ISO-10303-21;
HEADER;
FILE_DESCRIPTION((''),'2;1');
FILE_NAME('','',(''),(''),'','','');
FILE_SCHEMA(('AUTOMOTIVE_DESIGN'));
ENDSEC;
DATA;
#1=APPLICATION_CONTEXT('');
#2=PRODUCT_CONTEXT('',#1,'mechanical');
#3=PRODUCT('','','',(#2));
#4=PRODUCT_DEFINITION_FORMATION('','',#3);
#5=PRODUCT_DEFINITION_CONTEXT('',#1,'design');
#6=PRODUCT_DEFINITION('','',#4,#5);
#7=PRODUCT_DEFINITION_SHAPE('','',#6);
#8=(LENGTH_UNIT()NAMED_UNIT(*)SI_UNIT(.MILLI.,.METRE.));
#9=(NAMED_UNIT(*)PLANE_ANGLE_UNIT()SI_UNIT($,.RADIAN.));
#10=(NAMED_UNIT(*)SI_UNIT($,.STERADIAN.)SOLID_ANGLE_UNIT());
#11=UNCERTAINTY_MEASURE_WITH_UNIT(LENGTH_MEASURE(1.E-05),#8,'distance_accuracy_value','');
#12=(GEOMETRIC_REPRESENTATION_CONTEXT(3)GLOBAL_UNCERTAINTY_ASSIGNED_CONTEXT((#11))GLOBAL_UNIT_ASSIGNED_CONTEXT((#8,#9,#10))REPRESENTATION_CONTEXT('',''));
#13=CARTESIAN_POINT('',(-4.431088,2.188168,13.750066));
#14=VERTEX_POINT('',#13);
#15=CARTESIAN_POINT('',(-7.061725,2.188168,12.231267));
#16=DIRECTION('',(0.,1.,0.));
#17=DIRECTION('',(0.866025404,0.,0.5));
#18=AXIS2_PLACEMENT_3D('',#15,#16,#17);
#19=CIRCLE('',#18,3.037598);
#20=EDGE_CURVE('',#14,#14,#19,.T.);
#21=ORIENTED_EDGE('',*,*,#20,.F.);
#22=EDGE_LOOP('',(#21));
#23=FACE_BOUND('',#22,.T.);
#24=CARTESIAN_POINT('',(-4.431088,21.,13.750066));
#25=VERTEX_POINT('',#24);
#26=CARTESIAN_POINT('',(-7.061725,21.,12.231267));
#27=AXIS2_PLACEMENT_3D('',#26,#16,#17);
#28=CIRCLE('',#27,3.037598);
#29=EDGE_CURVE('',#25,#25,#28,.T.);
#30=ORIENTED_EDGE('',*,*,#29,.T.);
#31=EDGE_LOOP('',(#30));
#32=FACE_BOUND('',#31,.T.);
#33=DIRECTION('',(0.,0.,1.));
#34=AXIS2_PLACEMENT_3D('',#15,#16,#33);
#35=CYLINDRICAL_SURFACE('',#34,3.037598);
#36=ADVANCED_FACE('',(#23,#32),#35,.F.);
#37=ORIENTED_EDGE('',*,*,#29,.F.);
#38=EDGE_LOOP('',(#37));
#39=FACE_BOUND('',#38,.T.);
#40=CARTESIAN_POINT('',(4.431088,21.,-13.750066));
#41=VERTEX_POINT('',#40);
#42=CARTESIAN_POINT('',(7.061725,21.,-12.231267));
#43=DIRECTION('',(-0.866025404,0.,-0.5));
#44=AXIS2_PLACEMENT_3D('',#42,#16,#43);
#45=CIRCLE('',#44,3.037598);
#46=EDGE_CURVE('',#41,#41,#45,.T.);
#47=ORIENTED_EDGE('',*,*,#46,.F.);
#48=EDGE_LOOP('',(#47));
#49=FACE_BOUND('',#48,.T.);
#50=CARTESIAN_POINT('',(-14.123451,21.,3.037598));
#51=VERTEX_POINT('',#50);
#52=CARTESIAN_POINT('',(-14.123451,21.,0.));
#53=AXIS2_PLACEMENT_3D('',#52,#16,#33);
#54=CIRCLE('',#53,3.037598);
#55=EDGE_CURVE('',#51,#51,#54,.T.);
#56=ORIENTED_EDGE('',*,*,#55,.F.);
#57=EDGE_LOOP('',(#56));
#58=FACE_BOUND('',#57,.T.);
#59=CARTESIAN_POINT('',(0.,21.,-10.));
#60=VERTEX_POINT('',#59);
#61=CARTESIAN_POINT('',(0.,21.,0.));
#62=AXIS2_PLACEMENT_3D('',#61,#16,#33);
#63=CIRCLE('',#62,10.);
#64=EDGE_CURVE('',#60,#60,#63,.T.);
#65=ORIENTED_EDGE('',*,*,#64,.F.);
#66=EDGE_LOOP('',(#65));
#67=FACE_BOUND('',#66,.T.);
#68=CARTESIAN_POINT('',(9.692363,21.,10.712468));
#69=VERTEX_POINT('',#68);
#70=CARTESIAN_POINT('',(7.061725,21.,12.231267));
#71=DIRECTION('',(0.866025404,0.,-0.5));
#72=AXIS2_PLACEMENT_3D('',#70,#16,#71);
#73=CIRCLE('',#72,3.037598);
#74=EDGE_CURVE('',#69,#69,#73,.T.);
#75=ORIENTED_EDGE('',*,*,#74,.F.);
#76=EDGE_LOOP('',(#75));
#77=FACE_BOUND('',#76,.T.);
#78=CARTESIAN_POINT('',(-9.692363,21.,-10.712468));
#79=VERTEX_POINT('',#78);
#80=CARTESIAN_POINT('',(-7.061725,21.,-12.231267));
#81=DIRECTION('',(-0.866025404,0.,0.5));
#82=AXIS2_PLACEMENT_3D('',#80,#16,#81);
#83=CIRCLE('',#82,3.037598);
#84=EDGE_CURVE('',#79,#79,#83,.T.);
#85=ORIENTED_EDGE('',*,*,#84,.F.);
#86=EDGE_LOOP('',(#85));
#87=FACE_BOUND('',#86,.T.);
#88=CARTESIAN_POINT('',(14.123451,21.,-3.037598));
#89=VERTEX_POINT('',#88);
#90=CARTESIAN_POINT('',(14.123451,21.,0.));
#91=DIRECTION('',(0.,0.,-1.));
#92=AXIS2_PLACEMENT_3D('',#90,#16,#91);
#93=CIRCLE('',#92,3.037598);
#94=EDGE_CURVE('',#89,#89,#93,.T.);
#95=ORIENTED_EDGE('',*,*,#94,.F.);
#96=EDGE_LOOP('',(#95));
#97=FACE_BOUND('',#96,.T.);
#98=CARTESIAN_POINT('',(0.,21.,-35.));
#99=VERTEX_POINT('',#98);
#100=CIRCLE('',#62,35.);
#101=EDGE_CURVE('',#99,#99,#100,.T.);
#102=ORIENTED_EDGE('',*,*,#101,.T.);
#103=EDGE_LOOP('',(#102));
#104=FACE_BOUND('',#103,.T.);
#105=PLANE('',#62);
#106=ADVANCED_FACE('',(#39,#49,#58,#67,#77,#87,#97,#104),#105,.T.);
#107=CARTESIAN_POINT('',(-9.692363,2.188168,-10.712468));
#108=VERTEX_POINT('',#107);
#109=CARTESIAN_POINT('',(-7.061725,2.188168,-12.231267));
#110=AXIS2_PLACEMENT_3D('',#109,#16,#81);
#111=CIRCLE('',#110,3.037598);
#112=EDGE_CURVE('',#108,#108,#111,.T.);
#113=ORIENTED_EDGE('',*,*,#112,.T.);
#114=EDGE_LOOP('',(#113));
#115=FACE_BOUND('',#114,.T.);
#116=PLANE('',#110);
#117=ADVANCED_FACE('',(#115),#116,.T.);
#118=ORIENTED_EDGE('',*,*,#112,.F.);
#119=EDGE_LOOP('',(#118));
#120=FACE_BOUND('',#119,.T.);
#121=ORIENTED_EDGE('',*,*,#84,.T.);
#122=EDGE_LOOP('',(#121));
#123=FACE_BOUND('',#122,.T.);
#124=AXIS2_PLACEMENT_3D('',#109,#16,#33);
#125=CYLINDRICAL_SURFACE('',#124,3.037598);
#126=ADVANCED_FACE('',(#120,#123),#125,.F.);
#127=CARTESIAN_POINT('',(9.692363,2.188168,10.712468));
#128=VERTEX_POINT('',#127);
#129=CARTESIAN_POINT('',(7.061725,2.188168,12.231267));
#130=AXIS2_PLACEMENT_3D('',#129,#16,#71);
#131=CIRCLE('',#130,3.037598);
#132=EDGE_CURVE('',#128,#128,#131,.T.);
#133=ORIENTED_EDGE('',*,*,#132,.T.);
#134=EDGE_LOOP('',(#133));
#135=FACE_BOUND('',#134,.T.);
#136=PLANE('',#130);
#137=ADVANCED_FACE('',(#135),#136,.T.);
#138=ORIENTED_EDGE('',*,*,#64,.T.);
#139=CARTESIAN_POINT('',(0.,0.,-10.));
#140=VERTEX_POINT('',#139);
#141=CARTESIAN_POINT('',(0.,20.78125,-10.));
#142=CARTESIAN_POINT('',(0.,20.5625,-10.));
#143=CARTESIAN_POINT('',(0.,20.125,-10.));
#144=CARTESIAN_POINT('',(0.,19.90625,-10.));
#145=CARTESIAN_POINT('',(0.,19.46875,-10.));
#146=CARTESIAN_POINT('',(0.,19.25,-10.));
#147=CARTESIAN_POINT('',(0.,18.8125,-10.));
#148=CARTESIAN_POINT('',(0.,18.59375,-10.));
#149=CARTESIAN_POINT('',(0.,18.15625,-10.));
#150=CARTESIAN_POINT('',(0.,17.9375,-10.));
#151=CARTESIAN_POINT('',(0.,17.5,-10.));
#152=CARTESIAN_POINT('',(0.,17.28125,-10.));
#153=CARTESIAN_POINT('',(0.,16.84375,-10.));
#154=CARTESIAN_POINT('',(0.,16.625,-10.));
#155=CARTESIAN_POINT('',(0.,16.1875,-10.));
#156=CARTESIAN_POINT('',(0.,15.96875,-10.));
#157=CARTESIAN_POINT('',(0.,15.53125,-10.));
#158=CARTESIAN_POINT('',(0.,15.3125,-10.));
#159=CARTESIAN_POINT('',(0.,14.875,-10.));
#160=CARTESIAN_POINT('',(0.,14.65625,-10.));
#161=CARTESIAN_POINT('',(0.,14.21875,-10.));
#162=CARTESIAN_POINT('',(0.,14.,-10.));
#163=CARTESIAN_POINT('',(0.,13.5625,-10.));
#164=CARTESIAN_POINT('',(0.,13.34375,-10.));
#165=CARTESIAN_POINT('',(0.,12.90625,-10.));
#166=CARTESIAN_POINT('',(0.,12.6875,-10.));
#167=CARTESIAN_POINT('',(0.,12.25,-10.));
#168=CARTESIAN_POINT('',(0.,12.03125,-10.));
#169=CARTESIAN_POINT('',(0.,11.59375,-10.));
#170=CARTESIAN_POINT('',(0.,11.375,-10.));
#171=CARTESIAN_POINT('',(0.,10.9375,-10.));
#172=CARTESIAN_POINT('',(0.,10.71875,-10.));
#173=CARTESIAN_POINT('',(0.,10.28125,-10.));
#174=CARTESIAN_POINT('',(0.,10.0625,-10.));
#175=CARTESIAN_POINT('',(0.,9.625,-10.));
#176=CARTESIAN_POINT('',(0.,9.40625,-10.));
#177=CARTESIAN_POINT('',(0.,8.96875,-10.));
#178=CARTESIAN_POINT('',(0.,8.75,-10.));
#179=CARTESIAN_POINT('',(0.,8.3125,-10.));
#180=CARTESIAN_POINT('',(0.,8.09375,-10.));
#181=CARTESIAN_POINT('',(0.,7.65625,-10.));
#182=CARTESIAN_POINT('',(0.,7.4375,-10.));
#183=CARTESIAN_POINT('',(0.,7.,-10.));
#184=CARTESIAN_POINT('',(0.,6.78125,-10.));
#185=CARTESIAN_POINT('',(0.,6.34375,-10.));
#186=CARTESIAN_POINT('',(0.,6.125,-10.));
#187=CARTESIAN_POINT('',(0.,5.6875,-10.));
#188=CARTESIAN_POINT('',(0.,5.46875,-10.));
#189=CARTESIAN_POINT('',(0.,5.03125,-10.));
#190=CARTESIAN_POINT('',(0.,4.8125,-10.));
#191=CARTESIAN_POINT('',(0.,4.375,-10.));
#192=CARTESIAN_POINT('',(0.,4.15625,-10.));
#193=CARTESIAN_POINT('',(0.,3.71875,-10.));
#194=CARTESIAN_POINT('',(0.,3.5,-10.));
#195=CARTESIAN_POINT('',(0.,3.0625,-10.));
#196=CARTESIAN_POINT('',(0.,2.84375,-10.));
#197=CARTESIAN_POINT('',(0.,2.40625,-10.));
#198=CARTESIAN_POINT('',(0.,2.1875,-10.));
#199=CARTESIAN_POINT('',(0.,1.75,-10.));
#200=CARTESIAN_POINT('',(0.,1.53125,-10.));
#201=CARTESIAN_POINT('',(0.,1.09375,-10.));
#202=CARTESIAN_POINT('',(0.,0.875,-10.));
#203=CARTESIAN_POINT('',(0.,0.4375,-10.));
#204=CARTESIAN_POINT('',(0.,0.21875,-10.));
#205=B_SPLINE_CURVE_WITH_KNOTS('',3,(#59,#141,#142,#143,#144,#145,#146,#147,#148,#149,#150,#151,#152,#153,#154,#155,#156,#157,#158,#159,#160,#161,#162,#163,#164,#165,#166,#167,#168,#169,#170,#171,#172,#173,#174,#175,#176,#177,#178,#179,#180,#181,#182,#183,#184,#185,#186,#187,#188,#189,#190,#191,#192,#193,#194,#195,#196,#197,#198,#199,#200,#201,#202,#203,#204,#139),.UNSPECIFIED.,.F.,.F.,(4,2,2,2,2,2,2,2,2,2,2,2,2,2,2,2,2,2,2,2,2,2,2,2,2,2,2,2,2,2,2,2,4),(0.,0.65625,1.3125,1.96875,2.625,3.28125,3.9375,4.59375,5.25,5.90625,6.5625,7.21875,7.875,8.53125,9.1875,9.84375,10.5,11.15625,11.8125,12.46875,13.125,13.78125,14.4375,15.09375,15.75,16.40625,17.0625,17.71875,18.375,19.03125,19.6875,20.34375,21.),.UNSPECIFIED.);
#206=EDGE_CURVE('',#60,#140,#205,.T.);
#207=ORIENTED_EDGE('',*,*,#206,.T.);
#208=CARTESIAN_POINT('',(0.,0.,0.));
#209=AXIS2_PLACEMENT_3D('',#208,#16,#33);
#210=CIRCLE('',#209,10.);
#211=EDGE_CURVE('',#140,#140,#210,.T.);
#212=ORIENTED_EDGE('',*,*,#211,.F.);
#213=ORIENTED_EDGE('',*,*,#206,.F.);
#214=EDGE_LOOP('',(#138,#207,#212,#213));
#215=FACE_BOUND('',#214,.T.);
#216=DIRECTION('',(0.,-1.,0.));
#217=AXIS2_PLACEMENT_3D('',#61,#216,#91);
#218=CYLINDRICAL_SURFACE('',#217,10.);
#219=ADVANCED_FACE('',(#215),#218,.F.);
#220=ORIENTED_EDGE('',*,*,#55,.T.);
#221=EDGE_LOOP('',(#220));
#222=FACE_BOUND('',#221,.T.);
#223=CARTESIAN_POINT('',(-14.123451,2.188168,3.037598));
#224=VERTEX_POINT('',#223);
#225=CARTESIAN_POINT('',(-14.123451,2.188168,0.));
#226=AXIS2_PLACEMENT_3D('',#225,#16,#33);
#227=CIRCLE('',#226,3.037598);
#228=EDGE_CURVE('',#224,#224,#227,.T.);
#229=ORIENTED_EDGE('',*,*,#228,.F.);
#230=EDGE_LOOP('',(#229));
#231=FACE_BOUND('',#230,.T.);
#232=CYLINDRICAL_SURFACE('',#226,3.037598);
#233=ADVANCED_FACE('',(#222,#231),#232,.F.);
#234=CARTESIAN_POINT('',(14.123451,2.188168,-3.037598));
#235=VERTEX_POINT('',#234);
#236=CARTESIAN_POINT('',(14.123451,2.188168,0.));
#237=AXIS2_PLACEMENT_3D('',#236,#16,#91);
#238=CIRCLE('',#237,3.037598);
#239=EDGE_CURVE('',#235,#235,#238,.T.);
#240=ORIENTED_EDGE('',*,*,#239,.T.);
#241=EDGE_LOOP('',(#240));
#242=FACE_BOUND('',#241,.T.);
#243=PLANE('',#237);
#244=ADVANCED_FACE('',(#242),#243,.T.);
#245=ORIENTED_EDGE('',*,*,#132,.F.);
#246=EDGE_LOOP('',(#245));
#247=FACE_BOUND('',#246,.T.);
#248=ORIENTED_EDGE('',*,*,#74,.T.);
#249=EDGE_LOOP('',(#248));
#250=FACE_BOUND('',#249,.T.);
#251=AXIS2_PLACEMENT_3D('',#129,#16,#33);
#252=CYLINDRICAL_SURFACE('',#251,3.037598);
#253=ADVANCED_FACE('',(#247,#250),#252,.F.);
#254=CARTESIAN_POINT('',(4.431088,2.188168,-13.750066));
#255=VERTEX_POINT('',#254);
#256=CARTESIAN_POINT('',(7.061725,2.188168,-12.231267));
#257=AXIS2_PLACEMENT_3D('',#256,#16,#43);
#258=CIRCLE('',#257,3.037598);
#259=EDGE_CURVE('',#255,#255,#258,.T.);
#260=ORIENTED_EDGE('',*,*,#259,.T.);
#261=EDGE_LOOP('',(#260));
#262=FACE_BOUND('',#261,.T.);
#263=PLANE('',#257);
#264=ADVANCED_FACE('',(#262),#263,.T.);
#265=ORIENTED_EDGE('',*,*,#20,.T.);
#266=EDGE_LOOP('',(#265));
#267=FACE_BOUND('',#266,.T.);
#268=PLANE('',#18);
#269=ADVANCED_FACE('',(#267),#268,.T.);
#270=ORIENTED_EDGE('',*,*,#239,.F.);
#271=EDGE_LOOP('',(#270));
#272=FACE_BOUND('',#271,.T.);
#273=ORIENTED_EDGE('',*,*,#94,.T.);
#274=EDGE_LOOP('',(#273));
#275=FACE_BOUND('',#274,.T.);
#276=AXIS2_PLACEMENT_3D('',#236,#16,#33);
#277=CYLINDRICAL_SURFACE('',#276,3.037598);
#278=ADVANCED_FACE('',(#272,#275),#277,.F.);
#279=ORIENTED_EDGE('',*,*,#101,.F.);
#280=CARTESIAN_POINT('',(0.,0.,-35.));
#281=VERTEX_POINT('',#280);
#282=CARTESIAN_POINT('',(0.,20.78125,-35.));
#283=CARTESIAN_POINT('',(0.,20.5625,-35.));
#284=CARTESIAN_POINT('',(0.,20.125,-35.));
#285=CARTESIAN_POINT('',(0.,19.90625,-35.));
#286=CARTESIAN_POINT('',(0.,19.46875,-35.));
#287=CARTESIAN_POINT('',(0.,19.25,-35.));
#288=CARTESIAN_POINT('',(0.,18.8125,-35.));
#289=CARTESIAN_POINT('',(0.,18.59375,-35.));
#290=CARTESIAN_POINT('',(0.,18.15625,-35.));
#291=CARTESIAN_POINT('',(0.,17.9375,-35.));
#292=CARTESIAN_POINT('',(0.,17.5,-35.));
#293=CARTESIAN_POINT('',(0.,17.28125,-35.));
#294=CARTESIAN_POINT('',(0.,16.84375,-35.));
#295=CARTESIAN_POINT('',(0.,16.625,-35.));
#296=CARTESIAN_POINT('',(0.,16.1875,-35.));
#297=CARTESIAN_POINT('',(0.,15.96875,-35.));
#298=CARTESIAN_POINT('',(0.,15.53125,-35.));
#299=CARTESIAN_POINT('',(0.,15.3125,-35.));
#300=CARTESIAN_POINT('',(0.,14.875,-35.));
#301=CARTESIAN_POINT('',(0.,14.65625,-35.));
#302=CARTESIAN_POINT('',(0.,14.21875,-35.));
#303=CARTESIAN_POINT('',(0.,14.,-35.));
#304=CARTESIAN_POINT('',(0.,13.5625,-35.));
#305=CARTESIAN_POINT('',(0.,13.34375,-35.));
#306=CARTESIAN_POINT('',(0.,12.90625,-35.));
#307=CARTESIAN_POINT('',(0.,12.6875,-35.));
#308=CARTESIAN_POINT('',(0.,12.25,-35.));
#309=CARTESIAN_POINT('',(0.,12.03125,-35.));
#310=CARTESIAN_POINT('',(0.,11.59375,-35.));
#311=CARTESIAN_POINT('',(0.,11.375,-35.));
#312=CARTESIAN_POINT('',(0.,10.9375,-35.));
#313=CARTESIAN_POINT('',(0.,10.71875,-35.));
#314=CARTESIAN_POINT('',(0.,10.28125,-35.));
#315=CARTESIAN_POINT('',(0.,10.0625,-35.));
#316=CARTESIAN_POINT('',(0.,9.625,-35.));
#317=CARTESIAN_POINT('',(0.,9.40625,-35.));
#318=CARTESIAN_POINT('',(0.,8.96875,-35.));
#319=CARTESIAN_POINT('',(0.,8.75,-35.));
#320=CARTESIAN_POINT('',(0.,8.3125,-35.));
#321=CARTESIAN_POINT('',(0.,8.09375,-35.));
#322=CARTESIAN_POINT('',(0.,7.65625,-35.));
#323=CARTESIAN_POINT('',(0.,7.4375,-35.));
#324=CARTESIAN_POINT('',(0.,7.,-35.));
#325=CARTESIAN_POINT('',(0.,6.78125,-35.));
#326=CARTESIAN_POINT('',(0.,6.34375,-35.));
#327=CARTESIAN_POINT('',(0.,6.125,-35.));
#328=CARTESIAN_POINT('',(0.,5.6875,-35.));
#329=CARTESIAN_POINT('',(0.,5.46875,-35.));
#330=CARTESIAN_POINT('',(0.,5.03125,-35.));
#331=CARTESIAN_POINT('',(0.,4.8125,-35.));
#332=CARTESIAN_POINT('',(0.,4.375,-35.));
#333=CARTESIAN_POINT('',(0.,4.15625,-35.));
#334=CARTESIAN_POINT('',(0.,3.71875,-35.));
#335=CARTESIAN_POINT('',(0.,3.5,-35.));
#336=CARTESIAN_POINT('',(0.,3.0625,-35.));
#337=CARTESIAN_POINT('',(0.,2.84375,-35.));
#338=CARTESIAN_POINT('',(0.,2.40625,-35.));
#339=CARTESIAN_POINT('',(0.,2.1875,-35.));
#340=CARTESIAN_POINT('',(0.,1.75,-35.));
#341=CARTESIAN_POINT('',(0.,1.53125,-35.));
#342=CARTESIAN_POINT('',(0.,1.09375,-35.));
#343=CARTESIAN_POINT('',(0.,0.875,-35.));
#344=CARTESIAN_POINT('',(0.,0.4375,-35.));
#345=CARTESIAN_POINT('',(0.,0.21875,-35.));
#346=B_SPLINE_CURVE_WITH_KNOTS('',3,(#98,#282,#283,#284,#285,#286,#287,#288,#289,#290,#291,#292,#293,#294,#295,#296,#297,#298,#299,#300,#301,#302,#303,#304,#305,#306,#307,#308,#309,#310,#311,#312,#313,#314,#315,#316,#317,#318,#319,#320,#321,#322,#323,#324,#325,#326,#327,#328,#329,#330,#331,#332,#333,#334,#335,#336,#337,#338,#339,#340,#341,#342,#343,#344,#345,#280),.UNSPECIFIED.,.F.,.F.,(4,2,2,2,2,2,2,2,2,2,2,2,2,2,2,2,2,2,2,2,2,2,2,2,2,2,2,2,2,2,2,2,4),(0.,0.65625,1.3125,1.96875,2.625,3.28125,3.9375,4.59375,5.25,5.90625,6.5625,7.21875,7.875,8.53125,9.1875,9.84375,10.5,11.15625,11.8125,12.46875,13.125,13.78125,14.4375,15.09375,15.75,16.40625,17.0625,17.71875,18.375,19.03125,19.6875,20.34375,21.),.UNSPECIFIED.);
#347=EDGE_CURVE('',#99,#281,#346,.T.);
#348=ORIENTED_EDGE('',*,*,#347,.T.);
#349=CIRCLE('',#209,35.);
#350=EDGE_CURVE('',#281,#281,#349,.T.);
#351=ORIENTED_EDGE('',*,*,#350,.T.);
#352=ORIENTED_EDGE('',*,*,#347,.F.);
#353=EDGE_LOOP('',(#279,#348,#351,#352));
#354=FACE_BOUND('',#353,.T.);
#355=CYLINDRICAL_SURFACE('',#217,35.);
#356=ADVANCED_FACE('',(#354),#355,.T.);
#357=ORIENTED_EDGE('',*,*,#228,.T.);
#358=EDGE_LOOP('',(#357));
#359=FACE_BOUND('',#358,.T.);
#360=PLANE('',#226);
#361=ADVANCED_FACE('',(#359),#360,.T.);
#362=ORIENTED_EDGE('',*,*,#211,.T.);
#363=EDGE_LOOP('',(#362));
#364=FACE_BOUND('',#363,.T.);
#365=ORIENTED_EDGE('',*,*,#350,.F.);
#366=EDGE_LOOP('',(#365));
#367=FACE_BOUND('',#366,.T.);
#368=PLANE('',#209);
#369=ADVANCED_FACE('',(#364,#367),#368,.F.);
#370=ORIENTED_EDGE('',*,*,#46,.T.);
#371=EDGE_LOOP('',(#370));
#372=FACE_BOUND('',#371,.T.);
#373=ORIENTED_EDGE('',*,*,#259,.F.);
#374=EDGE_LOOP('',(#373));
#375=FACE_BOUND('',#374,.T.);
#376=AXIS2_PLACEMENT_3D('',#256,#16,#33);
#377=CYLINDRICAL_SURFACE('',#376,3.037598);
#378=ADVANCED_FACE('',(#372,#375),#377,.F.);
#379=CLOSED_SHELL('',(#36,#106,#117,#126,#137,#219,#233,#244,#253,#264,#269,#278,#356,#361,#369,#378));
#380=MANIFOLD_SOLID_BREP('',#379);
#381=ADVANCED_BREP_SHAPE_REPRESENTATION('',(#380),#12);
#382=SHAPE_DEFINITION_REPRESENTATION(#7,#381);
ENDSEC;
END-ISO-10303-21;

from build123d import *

# Parameters (mm, degrees)
SKETCH1_R           = 35
BOSS_EXTRUDE1_DEPTH = 21
SKETCH2_R           = 10
CUT_EXTRUDE1_DEPTH  = 54.768020235
SKETCH3_R           = 3.037598175
CUT_EXTRUDE2_DEPTH  = 18.811832248
CIRPATTERN1_COUNT   = 6


with BuildPart() as part:
    # Sketch1 → Boss-Extrude1 (new body)
    with BuildSketch(Plane(origin=(0, 0, 0), x_dir=(1, 0, 0), z_dir=(0, 1, 0))):
        Circle(SKETCH1_R)
    extrude(amount=BOSS_EXTRUDE1_DEPTH)

    # Sketch2 → Cut-Extrude1 (cut, through all)
    with BuildSketch(Plane(origin=(0, 0, 0), x_dir=(1, 0, 0), z_dir=(0, 1, 0))):
        Circle(SKETCH2_R)
    extrude(amount=CUT_EXTRUDE1_DEPTH, mode=Mode.SUBTRACT)

    # Sketch3 → Cut-Extrude2 (cut)
    with BuildSketch(Plane(origin=(0, 21, 0), x_dir=(1, 0, 0), z_dir=(0, 1, 0))):
        with Locations((-14.123450794, 0)):
            Circle(SKETCH3_R)
    cut_extrude2 = extrude(amount=-CUT_EXTRUDE2_DEPTH, mode=Mode.SUBTRACT)

    # CirPattern1: Cut-Extrude2 ×6 about axis
    cirpattern1_axis = Axis((0, 0, 0), (0, 1, 0))
    for i in range(1, CIRPATTERN1_COUNT):
        add(cut_extrude2.rotate(cirpattern1_axis, i * 360 / CIRPATTERN1_COUNT), mode=Mode.SUBTRACT)


solid = part.part
